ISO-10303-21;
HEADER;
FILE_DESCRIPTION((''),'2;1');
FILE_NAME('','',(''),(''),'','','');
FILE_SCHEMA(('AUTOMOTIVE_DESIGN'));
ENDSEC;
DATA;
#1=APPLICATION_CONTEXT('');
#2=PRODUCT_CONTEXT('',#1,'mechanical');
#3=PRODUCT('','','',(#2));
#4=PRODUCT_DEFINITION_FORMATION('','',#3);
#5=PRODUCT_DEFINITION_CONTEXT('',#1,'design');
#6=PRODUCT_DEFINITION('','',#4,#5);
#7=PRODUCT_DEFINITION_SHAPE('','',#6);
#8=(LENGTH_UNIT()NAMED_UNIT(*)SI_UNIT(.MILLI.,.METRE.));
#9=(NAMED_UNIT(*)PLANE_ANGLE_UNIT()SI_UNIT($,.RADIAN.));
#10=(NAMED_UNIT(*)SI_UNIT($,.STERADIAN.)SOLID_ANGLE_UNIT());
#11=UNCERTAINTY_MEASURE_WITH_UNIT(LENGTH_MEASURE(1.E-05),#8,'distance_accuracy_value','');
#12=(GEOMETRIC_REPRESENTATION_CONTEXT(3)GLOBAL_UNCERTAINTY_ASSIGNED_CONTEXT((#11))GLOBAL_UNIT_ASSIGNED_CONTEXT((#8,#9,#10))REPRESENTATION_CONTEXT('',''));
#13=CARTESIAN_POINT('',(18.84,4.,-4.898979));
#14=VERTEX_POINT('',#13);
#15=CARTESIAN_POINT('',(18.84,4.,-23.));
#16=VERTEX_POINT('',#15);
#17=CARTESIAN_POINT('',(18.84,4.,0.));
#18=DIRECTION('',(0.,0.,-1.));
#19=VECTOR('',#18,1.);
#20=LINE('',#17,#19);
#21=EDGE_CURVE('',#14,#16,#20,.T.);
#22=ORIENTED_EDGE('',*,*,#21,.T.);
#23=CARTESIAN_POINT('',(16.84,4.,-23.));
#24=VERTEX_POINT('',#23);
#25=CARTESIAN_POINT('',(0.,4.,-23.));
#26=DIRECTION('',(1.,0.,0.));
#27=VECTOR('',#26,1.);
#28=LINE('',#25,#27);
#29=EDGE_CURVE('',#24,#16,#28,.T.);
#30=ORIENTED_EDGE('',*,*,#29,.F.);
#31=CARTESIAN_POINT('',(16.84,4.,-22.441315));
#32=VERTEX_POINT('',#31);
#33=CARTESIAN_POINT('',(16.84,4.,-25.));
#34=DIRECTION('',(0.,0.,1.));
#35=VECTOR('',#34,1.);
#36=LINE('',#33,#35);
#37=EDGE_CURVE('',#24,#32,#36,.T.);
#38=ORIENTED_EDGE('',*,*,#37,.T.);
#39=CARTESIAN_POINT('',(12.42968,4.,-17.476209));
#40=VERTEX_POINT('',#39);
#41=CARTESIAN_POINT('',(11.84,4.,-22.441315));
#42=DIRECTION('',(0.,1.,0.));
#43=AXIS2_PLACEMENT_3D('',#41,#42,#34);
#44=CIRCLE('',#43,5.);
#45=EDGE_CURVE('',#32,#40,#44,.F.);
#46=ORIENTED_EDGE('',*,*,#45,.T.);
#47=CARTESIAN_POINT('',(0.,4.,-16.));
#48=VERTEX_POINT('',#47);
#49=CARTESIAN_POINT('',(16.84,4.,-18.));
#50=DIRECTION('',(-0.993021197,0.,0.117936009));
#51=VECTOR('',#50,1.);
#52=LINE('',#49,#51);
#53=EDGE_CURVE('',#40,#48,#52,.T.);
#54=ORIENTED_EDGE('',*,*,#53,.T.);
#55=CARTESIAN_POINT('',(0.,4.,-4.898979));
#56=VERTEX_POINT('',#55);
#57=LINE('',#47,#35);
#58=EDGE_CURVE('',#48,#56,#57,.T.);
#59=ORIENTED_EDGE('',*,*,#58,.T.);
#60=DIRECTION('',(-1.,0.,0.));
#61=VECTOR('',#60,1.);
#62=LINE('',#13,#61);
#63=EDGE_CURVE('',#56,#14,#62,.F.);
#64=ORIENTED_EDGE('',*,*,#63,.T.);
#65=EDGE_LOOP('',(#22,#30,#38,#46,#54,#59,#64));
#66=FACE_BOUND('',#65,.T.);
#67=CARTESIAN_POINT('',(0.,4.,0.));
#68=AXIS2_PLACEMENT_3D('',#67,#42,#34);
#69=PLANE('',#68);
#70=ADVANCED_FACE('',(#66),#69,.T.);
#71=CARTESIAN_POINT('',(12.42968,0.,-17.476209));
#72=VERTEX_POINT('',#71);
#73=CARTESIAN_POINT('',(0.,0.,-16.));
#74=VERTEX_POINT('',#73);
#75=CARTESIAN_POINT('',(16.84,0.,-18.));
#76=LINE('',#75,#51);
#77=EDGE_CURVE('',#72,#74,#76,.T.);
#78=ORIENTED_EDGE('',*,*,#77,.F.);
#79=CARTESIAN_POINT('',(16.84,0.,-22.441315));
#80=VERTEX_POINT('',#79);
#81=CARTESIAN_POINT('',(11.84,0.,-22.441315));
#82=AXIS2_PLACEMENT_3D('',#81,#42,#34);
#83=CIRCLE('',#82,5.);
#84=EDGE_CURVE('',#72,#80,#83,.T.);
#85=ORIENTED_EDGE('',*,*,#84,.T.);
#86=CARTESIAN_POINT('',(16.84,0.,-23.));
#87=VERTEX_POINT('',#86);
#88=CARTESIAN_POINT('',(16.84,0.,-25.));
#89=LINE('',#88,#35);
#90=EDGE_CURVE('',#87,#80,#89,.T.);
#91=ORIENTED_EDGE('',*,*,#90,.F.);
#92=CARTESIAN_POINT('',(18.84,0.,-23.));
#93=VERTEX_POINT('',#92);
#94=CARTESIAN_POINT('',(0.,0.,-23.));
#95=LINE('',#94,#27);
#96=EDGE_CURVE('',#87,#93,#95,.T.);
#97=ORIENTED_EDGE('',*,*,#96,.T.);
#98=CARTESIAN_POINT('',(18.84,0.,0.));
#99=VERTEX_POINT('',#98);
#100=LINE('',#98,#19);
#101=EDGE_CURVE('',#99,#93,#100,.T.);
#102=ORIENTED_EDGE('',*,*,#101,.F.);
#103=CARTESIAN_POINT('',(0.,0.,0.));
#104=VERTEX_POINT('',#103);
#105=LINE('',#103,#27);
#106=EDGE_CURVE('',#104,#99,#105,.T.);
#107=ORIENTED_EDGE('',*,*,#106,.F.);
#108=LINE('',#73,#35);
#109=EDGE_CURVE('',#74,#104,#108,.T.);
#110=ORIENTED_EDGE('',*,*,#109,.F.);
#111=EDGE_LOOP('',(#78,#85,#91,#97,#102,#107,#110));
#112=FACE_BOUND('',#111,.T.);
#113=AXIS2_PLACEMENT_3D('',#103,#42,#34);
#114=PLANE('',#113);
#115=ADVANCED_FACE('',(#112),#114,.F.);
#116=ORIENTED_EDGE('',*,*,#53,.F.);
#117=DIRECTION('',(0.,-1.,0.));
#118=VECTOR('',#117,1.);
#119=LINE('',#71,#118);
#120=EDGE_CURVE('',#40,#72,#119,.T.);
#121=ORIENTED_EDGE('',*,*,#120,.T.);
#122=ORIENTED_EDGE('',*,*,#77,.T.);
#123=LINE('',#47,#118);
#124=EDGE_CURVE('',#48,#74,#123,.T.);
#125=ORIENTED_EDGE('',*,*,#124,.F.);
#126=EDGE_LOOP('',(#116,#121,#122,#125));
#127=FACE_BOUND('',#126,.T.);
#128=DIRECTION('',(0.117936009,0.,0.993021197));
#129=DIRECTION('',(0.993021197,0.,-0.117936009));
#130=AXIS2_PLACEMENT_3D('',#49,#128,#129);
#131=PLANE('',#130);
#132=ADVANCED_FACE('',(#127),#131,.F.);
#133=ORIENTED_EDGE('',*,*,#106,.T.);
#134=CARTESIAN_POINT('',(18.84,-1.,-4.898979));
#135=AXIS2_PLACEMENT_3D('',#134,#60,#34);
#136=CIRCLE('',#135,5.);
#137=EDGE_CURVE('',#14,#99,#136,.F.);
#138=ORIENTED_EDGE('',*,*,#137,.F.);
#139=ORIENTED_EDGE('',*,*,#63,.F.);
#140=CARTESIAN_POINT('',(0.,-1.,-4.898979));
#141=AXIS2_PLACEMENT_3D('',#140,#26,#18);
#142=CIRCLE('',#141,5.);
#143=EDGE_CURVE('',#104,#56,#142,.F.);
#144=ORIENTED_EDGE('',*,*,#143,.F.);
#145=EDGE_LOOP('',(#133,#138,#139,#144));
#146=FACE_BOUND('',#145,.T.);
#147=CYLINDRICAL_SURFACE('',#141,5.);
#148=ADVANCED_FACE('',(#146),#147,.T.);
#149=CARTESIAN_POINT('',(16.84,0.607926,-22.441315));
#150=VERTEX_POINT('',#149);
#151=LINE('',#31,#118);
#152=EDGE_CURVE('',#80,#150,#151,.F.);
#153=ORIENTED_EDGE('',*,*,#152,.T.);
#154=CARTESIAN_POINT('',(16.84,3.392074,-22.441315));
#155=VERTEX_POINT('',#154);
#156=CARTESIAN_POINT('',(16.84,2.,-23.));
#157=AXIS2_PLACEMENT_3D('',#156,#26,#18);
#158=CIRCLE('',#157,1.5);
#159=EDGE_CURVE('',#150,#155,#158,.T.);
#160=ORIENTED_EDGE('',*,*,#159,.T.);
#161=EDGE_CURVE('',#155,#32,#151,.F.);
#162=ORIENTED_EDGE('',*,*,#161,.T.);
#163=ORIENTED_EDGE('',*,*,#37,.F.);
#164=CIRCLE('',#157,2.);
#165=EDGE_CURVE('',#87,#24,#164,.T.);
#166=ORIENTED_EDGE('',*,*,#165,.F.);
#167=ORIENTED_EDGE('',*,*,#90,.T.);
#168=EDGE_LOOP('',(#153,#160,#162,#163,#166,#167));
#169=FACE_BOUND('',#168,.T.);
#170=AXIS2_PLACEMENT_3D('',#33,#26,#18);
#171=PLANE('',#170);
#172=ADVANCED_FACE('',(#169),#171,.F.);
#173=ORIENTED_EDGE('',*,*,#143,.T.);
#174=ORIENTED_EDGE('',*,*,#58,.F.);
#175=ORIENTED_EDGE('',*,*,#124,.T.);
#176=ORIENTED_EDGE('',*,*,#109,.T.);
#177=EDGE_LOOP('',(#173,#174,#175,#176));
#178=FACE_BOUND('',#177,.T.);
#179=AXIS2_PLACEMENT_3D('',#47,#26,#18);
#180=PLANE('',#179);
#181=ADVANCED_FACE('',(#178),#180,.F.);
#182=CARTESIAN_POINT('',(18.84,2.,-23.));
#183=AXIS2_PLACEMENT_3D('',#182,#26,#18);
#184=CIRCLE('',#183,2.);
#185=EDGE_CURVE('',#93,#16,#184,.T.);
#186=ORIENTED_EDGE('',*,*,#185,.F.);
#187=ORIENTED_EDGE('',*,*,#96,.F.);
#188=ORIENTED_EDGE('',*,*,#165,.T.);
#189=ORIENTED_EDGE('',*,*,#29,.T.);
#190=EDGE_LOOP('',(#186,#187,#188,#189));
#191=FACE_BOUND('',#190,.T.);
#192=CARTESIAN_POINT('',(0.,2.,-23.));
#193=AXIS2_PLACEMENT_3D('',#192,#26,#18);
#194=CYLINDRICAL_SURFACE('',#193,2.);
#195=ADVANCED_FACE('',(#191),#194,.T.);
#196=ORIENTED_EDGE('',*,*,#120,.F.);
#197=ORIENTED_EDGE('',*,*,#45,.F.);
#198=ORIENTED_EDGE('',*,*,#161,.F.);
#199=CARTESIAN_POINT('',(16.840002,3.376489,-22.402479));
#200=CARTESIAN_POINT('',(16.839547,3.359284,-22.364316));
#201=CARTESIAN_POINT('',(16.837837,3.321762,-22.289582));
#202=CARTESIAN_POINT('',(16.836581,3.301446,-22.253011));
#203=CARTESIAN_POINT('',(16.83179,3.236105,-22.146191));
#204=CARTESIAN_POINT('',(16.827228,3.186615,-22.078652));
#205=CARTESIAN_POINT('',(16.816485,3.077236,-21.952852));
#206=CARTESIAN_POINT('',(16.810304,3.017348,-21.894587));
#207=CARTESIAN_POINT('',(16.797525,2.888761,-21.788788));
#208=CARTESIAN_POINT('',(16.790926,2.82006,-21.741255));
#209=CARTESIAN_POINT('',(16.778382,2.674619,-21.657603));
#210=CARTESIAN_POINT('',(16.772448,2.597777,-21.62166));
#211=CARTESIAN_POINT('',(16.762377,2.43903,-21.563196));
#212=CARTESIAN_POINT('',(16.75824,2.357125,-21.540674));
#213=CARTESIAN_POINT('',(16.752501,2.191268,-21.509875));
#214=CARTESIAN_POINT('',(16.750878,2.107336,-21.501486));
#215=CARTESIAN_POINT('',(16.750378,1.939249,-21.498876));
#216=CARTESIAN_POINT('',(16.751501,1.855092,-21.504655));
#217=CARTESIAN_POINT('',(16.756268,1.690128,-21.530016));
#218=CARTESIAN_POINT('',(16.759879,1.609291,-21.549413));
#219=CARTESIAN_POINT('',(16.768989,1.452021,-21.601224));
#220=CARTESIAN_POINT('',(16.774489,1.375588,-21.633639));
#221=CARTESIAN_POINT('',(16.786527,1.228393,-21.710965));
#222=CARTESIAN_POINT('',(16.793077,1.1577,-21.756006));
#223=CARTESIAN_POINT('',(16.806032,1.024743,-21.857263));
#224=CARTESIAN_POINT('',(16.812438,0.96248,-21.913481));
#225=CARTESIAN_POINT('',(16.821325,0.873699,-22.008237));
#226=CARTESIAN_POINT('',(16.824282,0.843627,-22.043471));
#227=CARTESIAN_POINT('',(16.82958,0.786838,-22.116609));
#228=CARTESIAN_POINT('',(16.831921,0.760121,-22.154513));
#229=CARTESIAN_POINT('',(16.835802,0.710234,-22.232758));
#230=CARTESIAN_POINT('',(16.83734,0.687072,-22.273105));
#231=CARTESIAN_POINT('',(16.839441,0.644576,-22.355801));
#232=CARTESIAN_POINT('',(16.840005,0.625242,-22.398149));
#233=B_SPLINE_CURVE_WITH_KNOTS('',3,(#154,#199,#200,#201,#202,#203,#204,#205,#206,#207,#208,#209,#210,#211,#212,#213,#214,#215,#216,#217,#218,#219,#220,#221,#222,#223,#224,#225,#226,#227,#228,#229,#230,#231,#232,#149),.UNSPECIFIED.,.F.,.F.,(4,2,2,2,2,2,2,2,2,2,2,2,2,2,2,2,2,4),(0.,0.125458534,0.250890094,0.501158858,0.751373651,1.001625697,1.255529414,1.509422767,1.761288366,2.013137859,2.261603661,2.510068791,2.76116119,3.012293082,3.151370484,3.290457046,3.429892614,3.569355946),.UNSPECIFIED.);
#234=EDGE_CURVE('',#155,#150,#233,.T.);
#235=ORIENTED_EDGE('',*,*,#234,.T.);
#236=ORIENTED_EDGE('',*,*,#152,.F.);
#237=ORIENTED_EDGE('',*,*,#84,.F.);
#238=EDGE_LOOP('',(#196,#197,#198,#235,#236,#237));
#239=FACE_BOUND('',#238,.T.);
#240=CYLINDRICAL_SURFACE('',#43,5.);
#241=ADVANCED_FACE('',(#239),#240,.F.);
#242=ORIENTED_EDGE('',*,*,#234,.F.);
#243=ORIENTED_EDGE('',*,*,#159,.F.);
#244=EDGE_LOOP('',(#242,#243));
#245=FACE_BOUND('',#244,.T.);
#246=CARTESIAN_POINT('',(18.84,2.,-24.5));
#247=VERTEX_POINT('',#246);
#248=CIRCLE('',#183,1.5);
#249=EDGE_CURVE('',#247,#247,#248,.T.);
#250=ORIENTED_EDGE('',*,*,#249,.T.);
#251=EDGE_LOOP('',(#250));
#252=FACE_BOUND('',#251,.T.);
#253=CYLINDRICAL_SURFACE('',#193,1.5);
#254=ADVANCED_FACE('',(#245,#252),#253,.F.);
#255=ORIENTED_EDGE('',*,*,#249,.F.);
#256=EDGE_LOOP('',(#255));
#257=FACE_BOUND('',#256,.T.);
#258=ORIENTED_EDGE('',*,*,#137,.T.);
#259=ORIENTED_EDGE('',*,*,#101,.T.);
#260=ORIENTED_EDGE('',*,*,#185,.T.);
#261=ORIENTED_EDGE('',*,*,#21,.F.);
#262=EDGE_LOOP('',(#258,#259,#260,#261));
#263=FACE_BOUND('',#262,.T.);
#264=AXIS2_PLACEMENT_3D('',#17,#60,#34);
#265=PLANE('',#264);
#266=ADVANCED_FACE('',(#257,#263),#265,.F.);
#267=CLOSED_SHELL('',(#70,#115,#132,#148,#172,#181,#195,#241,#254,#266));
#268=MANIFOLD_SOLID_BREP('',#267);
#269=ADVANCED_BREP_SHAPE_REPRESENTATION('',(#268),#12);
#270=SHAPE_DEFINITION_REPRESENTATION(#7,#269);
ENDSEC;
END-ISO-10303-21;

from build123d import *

# Parameters (mm, degrees)
BOSS_EXTRUDE1_DEPTH = 4
FILLET1_R           = 5
FILLET2_R           = 5
SKETCH6_R           = 1.5
CUT_EXTRUDE1_DEPTH  = 32.558605799


with BuildPart() as part:
    # Sketch2 → Boss-Extrude1 (new body)
    with BuildSketch(Plane(origin=(0, 0, 0), x_dir=(1, 0, 0), z_dir=(0, 1, 0))):
        Polygon((0, 0), (18.84, 0), (18.84, 25), (16.84, 25), (16.84, 18), (0, 16), align=None)
    extrude(amount=BOSS_EXTRUDE1_DEPTH)

    # Fillet1
    # the kernel refuses this fillet: 5 mm, written as the material it takes off along each edge
    with BuildSketch(Plane(origin=(-12.247448714, 4, 0), x_dir=(0, -1.0, -1.5634160632766466e-12), z_dir=(1, 0, 0))) as fillet1_piece_1:
        with BuildLine():
            CenterArc((5, 4.898979486), FILLET1_R, 180, 78.463040967)
            Line((0, 4.898979486), (-0.1, 4.898979486))
            Line((-0.1, 4.898979486), (-0.1, 0))
            Line((-0.1, 0), (0, -0.1))
            ThreePointArc((0, -0.1), (2, -0.1), (3.98, -0.09797959))
            Line((3.98, -0.09797959), (4, 0))
        make_face()
    extrude(amount=43.334897428, mode=Mode.SUBTRACT)

    # Fillet2
    fillet2_edges = [part.edges().sort_by_distance(p)[0] for p in [
        (16.84, 2, -18),
    ]]
    fillet(fillet2_edges, radius=FILLET2_R)

    # Sketch6 → Cut-Extrude1 (cut, through all)
    with BuildSketch(Plane(origin=(18.84, 0, 0), x_dir=(0, 0, -1), z_dir=(1, 0, 0))):
        with Locations((23, 2)):
            Circle(SKETCH6_R)
        with BuildLine():
            Line((25, 4), (23, 4))
            ThreePointArc((23, 4), (24.414213562, 3.414213562), (25, 2))
            Line((25, 2), (25, 4))
        make_face()
        with BuildLine():
            Line((25, 0), (25, 2))
            ThreePointArc((25, 2), (24.414213562, 0.585786438), (23, 0))
            Line((23, 0), (25, 0))
        make_face()
    extrude(amount=-CUT_EXTRUDE1_DEPTH, mode=Mode.SUBTRACT)


solid = part.part
